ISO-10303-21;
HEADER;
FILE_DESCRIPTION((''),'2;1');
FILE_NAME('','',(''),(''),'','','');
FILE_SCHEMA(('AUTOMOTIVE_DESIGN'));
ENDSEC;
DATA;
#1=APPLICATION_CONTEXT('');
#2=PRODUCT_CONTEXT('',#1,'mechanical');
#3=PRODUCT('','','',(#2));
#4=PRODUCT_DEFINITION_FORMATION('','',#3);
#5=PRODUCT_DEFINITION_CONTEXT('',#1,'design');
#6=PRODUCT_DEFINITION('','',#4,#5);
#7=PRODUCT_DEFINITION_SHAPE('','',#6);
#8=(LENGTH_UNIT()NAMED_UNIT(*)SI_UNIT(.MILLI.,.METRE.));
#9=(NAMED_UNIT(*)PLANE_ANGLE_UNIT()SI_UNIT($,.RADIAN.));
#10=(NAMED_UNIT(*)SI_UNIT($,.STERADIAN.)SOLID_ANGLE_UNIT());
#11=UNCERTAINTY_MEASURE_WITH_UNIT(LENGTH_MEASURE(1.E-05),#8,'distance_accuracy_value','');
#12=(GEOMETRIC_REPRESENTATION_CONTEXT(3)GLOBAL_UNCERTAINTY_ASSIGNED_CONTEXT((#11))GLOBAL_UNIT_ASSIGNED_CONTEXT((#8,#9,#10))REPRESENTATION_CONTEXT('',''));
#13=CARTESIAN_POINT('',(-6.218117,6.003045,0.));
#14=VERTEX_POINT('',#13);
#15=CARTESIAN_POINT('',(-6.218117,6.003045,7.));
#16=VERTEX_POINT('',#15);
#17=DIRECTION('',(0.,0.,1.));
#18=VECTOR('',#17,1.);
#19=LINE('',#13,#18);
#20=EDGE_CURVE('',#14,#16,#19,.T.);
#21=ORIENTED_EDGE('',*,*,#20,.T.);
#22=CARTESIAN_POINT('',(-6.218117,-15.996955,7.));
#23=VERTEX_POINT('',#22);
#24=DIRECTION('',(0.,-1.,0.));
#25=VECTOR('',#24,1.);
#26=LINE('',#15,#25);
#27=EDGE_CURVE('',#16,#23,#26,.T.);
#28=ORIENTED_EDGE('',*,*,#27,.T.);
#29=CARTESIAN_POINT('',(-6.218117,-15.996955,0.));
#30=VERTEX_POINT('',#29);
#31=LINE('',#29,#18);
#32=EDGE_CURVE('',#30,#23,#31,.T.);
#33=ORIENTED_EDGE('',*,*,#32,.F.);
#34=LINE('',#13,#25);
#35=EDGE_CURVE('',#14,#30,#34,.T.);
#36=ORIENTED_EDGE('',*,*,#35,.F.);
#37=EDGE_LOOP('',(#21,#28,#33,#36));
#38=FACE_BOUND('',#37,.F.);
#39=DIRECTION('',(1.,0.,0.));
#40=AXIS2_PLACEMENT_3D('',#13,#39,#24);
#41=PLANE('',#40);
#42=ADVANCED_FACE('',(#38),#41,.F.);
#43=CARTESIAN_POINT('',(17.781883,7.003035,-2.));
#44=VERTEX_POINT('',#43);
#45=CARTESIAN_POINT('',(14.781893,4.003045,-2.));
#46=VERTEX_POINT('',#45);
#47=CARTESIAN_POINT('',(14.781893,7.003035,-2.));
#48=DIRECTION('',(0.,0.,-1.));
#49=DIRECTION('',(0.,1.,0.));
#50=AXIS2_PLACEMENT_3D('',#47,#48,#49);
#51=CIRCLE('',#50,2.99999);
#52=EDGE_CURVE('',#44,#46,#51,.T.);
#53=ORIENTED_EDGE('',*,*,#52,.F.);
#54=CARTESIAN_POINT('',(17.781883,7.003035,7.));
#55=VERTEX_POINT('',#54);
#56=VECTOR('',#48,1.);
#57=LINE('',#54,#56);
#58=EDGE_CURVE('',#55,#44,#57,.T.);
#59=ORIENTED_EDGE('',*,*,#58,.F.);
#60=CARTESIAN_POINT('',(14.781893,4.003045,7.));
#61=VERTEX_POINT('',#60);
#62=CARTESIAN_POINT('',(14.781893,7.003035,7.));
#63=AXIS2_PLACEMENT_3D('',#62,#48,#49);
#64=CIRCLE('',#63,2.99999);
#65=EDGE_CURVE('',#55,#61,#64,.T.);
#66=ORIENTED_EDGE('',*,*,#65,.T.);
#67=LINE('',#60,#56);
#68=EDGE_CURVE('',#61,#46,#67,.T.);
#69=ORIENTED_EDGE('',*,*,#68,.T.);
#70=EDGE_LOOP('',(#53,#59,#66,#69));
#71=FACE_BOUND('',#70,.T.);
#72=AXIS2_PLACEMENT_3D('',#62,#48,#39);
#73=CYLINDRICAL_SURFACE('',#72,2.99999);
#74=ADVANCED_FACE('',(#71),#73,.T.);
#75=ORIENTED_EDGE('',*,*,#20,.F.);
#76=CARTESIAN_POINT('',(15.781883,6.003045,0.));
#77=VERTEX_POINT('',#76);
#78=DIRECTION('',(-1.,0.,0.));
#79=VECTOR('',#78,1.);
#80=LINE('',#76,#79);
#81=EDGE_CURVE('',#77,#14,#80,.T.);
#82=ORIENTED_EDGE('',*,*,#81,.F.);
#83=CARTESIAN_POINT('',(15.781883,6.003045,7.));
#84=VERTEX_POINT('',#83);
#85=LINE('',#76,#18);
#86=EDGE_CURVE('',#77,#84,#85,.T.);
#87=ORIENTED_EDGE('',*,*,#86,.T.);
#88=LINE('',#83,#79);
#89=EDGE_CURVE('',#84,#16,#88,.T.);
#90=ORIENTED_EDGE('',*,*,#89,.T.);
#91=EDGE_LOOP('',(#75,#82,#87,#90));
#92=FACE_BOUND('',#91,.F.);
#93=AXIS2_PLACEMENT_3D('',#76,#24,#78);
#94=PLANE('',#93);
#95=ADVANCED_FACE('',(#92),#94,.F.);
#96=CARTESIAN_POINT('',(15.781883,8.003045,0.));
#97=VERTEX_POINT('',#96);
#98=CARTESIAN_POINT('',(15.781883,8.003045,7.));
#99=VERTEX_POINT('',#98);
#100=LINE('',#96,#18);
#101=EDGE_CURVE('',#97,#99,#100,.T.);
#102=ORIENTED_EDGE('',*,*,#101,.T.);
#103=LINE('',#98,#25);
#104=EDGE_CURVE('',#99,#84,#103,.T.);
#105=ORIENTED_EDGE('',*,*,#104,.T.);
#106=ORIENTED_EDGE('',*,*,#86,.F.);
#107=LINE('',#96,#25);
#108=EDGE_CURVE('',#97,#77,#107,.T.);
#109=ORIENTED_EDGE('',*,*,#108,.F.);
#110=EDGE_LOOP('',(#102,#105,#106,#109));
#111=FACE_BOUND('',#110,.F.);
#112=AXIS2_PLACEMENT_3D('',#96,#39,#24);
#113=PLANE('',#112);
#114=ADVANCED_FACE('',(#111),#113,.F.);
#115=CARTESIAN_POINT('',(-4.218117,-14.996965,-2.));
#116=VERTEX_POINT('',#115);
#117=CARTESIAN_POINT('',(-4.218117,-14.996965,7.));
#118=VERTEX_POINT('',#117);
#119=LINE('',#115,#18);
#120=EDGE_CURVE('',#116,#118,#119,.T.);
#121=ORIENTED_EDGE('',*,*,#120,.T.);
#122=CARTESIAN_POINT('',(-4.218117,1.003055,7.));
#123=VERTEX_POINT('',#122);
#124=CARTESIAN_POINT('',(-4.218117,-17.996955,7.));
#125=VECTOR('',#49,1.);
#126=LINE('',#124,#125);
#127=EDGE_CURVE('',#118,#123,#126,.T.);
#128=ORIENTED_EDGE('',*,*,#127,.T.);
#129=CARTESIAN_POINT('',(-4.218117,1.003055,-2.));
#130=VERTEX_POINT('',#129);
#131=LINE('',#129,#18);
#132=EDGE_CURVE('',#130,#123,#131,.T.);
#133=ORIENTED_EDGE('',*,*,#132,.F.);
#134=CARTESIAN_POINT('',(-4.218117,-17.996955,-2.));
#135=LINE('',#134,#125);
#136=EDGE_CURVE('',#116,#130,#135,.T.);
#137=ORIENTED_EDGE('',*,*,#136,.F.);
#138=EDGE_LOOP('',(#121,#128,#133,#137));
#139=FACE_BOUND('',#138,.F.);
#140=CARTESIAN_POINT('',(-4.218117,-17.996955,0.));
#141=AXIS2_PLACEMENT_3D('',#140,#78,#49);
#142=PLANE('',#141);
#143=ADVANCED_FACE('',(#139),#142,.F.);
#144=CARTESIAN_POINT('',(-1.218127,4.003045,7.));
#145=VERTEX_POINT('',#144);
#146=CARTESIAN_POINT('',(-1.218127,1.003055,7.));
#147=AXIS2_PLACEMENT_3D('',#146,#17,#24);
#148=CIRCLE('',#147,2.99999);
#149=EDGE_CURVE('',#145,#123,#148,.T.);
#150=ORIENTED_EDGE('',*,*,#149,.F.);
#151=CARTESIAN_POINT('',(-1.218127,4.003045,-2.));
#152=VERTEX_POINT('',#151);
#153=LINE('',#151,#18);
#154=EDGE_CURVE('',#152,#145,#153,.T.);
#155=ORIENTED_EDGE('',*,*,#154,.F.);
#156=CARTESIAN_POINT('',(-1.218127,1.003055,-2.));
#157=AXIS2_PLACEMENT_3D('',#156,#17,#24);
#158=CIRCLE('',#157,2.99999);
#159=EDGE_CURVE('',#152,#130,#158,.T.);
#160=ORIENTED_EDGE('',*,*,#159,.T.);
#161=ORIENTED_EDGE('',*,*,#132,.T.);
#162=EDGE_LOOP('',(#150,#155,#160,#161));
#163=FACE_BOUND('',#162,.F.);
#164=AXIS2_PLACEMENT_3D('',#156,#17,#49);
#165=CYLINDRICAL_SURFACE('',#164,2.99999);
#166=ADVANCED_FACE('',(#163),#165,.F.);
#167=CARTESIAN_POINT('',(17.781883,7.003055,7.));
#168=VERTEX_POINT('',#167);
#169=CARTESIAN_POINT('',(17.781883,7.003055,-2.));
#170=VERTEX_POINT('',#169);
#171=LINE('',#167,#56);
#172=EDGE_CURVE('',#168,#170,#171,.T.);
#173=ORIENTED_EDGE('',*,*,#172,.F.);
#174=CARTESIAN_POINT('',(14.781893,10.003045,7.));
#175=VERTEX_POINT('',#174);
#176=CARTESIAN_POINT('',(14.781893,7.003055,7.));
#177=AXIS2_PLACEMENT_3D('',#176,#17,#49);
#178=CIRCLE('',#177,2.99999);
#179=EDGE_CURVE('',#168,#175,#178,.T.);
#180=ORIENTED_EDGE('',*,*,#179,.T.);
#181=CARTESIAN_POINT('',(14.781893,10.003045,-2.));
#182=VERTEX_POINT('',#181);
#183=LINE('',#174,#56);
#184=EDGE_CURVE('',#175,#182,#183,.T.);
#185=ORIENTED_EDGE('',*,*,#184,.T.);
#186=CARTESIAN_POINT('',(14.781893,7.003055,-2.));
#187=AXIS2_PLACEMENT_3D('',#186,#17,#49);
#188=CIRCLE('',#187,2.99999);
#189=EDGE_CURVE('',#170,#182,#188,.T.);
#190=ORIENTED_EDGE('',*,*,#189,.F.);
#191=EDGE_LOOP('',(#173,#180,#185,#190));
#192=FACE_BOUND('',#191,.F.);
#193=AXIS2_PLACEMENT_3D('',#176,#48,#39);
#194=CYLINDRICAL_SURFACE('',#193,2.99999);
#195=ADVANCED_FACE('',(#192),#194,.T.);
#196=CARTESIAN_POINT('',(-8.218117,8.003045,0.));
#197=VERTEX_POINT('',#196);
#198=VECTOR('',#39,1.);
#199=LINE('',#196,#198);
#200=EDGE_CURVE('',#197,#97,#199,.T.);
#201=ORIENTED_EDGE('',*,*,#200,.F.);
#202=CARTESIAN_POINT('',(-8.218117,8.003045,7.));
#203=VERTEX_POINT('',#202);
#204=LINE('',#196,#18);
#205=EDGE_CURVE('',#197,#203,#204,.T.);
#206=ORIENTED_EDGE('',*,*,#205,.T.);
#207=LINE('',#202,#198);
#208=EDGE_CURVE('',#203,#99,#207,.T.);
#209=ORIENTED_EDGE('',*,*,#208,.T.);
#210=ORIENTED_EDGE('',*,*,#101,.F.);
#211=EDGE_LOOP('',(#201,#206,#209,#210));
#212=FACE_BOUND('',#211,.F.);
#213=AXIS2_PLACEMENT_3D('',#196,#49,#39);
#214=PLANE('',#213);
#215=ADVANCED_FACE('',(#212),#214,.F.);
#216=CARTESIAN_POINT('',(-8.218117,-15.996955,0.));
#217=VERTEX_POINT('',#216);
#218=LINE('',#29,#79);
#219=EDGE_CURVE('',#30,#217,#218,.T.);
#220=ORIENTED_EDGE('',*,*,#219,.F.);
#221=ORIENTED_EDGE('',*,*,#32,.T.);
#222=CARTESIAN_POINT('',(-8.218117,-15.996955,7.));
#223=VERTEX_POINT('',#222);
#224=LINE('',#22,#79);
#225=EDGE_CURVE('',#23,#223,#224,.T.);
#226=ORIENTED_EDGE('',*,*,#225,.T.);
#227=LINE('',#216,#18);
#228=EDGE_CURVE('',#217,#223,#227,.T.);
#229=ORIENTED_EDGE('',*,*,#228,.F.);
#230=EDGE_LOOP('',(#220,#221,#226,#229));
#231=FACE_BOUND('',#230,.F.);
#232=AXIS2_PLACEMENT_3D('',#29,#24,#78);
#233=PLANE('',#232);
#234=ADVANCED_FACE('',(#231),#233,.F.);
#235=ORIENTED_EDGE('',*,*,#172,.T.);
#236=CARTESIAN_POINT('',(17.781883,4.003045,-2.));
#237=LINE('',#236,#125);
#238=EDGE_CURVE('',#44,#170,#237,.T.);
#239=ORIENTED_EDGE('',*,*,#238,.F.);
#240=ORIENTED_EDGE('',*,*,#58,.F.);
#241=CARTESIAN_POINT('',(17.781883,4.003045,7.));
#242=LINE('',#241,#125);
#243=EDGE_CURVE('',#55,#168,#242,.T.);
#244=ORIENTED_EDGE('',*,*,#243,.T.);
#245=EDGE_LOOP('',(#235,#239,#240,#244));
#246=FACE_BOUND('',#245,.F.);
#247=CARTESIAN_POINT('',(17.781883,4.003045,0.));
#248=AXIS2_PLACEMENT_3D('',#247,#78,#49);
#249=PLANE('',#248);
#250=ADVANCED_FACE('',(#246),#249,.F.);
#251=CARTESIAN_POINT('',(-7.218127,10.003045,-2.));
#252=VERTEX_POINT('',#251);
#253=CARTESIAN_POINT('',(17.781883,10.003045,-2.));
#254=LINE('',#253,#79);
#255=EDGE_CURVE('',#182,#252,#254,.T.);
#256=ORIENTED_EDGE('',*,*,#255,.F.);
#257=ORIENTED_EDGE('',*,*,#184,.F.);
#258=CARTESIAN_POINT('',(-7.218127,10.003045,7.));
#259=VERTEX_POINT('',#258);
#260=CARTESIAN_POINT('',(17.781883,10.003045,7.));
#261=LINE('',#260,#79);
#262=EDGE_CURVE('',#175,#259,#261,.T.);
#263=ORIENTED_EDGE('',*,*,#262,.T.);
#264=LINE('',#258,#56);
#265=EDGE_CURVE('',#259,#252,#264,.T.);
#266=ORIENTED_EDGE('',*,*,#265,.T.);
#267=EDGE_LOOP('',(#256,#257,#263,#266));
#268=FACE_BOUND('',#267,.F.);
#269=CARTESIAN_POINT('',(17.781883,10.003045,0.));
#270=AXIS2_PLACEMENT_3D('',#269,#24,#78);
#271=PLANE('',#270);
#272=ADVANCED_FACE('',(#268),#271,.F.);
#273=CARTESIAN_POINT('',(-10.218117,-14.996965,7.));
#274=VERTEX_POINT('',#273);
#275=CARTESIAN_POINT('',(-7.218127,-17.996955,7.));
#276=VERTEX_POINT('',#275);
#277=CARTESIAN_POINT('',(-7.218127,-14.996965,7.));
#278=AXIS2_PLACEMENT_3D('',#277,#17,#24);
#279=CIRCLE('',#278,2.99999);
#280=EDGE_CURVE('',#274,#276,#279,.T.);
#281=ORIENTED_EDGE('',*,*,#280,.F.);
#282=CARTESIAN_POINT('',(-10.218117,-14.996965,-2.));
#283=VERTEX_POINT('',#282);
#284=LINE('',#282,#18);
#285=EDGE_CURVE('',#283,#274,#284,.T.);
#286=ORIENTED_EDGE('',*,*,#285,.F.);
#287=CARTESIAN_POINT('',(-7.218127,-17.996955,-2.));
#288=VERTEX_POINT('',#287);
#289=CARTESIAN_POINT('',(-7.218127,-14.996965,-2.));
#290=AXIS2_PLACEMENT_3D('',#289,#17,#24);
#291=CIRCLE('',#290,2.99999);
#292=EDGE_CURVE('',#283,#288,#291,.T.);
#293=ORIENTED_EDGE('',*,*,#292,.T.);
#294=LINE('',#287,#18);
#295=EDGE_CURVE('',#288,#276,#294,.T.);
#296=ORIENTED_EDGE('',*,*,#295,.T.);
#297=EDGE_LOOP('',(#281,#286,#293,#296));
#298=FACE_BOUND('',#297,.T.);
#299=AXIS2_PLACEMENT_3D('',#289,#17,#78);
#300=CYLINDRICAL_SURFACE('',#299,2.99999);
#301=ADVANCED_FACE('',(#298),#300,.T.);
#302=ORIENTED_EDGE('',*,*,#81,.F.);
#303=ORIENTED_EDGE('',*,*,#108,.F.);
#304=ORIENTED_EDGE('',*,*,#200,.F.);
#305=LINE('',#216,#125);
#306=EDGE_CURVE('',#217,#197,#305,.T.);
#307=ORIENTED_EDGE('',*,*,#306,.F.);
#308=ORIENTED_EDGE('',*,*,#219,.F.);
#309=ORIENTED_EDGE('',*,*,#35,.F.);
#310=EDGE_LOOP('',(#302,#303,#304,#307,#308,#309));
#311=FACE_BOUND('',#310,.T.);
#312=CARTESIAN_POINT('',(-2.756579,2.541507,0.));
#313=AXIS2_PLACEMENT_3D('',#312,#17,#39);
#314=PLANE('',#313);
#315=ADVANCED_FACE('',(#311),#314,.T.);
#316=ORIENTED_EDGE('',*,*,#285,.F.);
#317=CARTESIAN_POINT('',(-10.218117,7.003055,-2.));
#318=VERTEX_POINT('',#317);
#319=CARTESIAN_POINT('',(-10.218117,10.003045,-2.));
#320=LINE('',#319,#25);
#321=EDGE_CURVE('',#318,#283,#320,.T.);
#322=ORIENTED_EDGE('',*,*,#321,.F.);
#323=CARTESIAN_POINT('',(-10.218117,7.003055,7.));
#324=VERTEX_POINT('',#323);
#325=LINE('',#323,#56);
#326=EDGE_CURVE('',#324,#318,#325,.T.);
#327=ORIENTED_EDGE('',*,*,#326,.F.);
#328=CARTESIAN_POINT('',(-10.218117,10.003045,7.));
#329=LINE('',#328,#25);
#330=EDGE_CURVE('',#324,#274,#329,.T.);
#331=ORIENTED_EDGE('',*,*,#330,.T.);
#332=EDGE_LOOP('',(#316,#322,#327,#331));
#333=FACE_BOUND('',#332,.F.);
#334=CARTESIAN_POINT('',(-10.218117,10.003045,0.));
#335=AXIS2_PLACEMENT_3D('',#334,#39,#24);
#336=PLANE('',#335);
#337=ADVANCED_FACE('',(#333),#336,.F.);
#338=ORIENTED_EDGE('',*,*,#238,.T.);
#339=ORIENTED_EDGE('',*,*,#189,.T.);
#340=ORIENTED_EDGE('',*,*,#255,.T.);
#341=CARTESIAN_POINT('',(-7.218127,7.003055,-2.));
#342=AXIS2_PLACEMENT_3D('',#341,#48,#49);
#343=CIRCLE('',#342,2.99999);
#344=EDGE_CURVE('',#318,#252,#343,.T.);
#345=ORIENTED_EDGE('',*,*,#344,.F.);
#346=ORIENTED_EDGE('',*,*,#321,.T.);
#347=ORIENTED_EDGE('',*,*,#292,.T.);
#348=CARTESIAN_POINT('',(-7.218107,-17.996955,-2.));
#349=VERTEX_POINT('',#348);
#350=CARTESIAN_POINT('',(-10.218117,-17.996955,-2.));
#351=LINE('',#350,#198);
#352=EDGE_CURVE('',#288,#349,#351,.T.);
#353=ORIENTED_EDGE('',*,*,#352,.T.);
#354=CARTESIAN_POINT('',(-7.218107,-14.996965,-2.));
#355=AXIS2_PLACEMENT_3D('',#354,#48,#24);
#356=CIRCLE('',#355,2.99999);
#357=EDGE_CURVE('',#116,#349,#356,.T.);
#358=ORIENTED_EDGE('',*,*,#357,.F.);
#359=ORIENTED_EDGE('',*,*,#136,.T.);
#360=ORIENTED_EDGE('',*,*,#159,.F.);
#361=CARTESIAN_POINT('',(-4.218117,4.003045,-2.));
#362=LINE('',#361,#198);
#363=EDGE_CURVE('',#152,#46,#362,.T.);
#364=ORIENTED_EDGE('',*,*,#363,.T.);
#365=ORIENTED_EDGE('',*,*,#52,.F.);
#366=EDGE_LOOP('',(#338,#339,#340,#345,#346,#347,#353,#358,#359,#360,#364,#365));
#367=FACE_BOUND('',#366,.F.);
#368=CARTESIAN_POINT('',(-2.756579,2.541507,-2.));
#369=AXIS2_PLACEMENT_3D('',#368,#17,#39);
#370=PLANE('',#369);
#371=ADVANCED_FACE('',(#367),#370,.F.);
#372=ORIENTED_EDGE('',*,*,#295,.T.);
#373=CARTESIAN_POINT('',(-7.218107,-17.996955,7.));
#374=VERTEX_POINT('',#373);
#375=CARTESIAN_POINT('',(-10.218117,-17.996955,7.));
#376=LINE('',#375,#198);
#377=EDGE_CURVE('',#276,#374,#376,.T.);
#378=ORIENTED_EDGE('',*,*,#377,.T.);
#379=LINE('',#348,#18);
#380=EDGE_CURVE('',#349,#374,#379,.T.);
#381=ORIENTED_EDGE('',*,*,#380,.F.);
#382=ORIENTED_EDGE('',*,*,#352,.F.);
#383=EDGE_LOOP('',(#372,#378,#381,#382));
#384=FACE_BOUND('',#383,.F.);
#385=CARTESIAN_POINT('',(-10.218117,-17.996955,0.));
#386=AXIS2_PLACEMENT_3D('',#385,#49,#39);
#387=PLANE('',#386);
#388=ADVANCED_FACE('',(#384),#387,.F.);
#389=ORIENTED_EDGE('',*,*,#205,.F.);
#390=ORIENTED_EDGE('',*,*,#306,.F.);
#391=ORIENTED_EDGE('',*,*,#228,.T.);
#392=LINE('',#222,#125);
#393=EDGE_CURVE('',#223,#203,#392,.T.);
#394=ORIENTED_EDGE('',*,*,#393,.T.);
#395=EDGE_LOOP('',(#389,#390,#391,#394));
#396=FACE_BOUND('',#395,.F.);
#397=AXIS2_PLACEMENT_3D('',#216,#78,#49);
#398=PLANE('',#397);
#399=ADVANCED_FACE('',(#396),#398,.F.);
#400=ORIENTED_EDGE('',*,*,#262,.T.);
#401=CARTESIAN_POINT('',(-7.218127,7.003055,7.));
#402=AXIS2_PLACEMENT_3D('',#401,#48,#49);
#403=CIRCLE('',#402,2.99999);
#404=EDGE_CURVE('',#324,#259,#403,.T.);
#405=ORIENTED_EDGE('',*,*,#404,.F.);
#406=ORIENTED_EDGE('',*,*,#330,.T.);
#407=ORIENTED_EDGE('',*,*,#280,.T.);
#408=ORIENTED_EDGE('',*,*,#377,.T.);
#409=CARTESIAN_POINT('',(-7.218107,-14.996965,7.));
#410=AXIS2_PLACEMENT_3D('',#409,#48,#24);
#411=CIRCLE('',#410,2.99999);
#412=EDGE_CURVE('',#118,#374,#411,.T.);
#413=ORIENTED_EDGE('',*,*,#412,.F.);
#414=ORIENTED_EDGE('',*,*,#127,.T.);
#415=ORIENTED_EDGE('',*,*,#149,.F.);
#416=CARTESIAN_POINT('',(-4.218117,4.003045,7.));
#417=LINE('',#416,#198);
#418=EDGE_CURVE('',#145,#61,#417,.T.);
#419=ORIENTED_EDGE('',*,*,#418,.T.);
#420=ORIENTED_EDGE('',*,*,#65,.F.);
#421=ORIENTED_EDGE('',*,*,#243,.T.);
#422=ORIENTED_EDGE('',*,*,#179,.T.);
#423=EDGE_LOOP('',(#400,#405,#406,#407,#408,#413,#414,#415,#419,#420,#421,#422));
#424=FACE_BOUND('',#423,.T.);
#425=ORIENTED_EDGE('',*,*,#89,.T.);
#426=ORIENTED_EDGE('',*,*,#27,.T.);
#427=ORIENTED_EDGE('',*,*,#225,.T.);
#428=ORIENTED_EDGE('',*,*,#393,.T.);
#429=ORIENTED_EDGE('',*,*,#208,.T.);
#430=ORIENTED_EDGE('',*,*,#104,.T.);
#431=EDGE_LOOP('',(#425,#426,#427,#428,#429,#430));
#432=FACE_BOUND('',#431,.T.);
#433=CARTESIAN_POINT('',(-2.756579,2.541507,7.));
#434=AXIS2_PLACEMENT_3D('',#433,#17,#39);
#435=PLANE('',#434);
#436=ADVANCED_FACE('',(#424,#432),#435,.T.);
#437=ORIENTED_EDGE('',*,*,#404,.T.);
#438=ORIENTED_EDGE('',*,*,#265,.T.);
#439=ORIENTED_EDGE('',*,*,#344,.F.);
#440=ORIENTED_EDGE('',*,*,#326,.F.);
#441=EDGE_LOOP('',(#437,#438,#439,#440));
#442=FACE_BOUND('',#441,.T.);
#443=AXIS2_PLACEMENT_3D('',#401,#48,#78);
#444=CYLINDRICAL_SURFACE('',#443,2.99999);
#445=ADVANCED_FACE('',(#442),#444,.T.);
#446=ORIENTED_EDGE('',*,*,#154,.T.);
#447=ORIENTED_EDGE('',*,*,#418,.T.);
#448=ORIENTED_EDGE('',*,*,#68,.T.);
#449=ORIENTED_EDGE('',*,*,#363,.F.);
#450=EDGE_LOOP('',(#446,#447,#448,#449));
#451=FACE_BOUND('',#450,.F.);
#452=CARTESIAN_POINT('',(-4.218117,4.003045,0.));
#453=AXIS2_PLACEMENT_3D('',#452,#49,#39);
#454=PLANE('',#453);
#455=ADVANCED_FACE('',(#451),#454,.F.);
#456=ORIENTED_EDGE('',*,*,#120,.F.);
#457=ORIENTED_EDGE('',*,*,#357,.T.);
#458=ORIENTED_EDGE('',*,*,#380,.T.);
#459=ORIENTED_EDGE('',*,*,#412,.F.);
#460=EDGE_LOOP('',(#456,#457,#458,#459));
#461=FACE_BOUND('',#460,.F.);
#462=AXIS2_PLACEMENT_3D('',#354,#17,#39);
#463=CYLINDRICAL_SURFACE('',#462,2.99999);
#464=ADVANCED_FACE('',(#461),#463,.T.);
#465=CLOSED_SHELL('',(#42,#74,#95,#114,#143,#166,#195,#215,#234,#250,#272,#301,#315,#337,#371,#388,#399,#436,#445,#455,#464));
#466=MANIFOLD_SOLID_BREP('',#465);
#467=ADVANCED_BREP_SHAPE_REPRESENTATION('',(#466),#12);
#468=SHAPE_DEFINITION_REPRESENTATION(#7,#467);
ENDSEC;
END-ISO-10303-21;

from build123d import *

# Parameters (mm, degrees)
F1_DEPTH = 2
F2_DEPTH = 7
F3_R     = 2.99999


# Not quite as in the source:
# - a fillet or chamfer is up to 0.001 mm smaller than in the source, because OpenCascade refuses the exact size


with BuildPart() as f1:
    # F0 (on Top) → F1 (new body)
    with BuildSketch(Plane.XY):
        Polygon((15.7818826017, 10.0030450644), (-10.2181173983, 10.0030450644), (-10.2181173983, -15.9969549356), (-8.2181173983, -15.9969549356), (-8.2181173983, 8.0030450644), (15.7818826017, 8.0030450644), align=None)
        Polygon((15.7818826017, 6.0030450644), (15.7818826017, 8.0030450644), (-8.2181173983, 8.0030450644), (-8.2181173983, -15.9969549356), (-6.2181173983, -15.9969549356), (-6.2181173983, 6.0030450644), align=None)
        Polygon((15.7818826017, 4.0030450644), (15.7818826017, 6.0030450644), (-6.2181173983, 6.0030450644), (-6.2181173983, -15.9969549356), (-4.2181173983, -15.9969549356), (-4.2181173983, 4.0030450644), align=None)
        Polygon((17.7818826017, 10.0030450644), (15.7818826017, 10.0030450644), (15.7818826017, 8.0030450644), (15.7818826017, 6.0030450644), (15.7818826017, 4.0030450644), (17.7818826017, 4.0030450644), align=None)
        Polygon((-8.2181173983, -15.9969549356), (-10.2181173983, -15.9969549356), (-10.2181173983, -17.9969549356), (-4.2181173983, -17.9969549356), (-4.2181173983, -15.9969549356), (-6.2181173983, -15.9969549356), align=None)
    extrude(amount=-F1_DEPTH)

    # F0 (on Top) → F2 (join)
    with BuildSketch(Plane.XY):
        Polygon((15.7818826017, 10.0030450644), (-10.2181173983, 10.0030450644), (-10.2181173983, -15.9969549356), (-8.2181173983, -15.9969549356), (-8.2181173983, 8.0030450644), (15.7818826017, 8.0030450644), align=None)
        Polygon((15.7818826017, 4.0030450644), (15.7818826017, 6.0030450644), (-6.2181173983, 6.0030450644), (-6.2181173983, -15.9969549356), (-4.2181173983, -15.9969549356), (-4.2181173983, 4.0030450644), align=None)
        Polygon((17.7818826017, 10.0030450644), (15.7818826017, 10.0030450644), (15.7818826017, 8.0030450644), (15.7818826017, 6.0030450644), (15.7818826017, 4.0030450644), (17.7818826017, 4.0030450644), align=None)
        Polygon((-8.2181173983, -15.9969549356), (-10.2181173983, -15.9969549356), (-10.2181173983, -17.9969549356), (-4.2181173983, -17.9969549356), (-4.2181173983, -15.9969549356), (-6.2181173983, -15.9969549356), align=None)
    extrude(amount=F2_DEPTH)

    # F3 (radius 3 in the source; OpenCascade refuses exactly that, so slightly less here)
    f3_edges = [f1.edges().sort_by_distance(p)[0] for p in [
        (-4.218117, 4.003045, 2.5),
        (-10.218117, 10.003045, 2.5),
        (-10.218117, -17.996955, 2.5),
        (-4.218117, -17.996955, 2.5),
        (17.781883, 4.003045, 2.5),
        (17.781883, 10.003045, 2.5),
    ]]
    fillet(f3_edges, radius=F3_R)


solid = f1.part
